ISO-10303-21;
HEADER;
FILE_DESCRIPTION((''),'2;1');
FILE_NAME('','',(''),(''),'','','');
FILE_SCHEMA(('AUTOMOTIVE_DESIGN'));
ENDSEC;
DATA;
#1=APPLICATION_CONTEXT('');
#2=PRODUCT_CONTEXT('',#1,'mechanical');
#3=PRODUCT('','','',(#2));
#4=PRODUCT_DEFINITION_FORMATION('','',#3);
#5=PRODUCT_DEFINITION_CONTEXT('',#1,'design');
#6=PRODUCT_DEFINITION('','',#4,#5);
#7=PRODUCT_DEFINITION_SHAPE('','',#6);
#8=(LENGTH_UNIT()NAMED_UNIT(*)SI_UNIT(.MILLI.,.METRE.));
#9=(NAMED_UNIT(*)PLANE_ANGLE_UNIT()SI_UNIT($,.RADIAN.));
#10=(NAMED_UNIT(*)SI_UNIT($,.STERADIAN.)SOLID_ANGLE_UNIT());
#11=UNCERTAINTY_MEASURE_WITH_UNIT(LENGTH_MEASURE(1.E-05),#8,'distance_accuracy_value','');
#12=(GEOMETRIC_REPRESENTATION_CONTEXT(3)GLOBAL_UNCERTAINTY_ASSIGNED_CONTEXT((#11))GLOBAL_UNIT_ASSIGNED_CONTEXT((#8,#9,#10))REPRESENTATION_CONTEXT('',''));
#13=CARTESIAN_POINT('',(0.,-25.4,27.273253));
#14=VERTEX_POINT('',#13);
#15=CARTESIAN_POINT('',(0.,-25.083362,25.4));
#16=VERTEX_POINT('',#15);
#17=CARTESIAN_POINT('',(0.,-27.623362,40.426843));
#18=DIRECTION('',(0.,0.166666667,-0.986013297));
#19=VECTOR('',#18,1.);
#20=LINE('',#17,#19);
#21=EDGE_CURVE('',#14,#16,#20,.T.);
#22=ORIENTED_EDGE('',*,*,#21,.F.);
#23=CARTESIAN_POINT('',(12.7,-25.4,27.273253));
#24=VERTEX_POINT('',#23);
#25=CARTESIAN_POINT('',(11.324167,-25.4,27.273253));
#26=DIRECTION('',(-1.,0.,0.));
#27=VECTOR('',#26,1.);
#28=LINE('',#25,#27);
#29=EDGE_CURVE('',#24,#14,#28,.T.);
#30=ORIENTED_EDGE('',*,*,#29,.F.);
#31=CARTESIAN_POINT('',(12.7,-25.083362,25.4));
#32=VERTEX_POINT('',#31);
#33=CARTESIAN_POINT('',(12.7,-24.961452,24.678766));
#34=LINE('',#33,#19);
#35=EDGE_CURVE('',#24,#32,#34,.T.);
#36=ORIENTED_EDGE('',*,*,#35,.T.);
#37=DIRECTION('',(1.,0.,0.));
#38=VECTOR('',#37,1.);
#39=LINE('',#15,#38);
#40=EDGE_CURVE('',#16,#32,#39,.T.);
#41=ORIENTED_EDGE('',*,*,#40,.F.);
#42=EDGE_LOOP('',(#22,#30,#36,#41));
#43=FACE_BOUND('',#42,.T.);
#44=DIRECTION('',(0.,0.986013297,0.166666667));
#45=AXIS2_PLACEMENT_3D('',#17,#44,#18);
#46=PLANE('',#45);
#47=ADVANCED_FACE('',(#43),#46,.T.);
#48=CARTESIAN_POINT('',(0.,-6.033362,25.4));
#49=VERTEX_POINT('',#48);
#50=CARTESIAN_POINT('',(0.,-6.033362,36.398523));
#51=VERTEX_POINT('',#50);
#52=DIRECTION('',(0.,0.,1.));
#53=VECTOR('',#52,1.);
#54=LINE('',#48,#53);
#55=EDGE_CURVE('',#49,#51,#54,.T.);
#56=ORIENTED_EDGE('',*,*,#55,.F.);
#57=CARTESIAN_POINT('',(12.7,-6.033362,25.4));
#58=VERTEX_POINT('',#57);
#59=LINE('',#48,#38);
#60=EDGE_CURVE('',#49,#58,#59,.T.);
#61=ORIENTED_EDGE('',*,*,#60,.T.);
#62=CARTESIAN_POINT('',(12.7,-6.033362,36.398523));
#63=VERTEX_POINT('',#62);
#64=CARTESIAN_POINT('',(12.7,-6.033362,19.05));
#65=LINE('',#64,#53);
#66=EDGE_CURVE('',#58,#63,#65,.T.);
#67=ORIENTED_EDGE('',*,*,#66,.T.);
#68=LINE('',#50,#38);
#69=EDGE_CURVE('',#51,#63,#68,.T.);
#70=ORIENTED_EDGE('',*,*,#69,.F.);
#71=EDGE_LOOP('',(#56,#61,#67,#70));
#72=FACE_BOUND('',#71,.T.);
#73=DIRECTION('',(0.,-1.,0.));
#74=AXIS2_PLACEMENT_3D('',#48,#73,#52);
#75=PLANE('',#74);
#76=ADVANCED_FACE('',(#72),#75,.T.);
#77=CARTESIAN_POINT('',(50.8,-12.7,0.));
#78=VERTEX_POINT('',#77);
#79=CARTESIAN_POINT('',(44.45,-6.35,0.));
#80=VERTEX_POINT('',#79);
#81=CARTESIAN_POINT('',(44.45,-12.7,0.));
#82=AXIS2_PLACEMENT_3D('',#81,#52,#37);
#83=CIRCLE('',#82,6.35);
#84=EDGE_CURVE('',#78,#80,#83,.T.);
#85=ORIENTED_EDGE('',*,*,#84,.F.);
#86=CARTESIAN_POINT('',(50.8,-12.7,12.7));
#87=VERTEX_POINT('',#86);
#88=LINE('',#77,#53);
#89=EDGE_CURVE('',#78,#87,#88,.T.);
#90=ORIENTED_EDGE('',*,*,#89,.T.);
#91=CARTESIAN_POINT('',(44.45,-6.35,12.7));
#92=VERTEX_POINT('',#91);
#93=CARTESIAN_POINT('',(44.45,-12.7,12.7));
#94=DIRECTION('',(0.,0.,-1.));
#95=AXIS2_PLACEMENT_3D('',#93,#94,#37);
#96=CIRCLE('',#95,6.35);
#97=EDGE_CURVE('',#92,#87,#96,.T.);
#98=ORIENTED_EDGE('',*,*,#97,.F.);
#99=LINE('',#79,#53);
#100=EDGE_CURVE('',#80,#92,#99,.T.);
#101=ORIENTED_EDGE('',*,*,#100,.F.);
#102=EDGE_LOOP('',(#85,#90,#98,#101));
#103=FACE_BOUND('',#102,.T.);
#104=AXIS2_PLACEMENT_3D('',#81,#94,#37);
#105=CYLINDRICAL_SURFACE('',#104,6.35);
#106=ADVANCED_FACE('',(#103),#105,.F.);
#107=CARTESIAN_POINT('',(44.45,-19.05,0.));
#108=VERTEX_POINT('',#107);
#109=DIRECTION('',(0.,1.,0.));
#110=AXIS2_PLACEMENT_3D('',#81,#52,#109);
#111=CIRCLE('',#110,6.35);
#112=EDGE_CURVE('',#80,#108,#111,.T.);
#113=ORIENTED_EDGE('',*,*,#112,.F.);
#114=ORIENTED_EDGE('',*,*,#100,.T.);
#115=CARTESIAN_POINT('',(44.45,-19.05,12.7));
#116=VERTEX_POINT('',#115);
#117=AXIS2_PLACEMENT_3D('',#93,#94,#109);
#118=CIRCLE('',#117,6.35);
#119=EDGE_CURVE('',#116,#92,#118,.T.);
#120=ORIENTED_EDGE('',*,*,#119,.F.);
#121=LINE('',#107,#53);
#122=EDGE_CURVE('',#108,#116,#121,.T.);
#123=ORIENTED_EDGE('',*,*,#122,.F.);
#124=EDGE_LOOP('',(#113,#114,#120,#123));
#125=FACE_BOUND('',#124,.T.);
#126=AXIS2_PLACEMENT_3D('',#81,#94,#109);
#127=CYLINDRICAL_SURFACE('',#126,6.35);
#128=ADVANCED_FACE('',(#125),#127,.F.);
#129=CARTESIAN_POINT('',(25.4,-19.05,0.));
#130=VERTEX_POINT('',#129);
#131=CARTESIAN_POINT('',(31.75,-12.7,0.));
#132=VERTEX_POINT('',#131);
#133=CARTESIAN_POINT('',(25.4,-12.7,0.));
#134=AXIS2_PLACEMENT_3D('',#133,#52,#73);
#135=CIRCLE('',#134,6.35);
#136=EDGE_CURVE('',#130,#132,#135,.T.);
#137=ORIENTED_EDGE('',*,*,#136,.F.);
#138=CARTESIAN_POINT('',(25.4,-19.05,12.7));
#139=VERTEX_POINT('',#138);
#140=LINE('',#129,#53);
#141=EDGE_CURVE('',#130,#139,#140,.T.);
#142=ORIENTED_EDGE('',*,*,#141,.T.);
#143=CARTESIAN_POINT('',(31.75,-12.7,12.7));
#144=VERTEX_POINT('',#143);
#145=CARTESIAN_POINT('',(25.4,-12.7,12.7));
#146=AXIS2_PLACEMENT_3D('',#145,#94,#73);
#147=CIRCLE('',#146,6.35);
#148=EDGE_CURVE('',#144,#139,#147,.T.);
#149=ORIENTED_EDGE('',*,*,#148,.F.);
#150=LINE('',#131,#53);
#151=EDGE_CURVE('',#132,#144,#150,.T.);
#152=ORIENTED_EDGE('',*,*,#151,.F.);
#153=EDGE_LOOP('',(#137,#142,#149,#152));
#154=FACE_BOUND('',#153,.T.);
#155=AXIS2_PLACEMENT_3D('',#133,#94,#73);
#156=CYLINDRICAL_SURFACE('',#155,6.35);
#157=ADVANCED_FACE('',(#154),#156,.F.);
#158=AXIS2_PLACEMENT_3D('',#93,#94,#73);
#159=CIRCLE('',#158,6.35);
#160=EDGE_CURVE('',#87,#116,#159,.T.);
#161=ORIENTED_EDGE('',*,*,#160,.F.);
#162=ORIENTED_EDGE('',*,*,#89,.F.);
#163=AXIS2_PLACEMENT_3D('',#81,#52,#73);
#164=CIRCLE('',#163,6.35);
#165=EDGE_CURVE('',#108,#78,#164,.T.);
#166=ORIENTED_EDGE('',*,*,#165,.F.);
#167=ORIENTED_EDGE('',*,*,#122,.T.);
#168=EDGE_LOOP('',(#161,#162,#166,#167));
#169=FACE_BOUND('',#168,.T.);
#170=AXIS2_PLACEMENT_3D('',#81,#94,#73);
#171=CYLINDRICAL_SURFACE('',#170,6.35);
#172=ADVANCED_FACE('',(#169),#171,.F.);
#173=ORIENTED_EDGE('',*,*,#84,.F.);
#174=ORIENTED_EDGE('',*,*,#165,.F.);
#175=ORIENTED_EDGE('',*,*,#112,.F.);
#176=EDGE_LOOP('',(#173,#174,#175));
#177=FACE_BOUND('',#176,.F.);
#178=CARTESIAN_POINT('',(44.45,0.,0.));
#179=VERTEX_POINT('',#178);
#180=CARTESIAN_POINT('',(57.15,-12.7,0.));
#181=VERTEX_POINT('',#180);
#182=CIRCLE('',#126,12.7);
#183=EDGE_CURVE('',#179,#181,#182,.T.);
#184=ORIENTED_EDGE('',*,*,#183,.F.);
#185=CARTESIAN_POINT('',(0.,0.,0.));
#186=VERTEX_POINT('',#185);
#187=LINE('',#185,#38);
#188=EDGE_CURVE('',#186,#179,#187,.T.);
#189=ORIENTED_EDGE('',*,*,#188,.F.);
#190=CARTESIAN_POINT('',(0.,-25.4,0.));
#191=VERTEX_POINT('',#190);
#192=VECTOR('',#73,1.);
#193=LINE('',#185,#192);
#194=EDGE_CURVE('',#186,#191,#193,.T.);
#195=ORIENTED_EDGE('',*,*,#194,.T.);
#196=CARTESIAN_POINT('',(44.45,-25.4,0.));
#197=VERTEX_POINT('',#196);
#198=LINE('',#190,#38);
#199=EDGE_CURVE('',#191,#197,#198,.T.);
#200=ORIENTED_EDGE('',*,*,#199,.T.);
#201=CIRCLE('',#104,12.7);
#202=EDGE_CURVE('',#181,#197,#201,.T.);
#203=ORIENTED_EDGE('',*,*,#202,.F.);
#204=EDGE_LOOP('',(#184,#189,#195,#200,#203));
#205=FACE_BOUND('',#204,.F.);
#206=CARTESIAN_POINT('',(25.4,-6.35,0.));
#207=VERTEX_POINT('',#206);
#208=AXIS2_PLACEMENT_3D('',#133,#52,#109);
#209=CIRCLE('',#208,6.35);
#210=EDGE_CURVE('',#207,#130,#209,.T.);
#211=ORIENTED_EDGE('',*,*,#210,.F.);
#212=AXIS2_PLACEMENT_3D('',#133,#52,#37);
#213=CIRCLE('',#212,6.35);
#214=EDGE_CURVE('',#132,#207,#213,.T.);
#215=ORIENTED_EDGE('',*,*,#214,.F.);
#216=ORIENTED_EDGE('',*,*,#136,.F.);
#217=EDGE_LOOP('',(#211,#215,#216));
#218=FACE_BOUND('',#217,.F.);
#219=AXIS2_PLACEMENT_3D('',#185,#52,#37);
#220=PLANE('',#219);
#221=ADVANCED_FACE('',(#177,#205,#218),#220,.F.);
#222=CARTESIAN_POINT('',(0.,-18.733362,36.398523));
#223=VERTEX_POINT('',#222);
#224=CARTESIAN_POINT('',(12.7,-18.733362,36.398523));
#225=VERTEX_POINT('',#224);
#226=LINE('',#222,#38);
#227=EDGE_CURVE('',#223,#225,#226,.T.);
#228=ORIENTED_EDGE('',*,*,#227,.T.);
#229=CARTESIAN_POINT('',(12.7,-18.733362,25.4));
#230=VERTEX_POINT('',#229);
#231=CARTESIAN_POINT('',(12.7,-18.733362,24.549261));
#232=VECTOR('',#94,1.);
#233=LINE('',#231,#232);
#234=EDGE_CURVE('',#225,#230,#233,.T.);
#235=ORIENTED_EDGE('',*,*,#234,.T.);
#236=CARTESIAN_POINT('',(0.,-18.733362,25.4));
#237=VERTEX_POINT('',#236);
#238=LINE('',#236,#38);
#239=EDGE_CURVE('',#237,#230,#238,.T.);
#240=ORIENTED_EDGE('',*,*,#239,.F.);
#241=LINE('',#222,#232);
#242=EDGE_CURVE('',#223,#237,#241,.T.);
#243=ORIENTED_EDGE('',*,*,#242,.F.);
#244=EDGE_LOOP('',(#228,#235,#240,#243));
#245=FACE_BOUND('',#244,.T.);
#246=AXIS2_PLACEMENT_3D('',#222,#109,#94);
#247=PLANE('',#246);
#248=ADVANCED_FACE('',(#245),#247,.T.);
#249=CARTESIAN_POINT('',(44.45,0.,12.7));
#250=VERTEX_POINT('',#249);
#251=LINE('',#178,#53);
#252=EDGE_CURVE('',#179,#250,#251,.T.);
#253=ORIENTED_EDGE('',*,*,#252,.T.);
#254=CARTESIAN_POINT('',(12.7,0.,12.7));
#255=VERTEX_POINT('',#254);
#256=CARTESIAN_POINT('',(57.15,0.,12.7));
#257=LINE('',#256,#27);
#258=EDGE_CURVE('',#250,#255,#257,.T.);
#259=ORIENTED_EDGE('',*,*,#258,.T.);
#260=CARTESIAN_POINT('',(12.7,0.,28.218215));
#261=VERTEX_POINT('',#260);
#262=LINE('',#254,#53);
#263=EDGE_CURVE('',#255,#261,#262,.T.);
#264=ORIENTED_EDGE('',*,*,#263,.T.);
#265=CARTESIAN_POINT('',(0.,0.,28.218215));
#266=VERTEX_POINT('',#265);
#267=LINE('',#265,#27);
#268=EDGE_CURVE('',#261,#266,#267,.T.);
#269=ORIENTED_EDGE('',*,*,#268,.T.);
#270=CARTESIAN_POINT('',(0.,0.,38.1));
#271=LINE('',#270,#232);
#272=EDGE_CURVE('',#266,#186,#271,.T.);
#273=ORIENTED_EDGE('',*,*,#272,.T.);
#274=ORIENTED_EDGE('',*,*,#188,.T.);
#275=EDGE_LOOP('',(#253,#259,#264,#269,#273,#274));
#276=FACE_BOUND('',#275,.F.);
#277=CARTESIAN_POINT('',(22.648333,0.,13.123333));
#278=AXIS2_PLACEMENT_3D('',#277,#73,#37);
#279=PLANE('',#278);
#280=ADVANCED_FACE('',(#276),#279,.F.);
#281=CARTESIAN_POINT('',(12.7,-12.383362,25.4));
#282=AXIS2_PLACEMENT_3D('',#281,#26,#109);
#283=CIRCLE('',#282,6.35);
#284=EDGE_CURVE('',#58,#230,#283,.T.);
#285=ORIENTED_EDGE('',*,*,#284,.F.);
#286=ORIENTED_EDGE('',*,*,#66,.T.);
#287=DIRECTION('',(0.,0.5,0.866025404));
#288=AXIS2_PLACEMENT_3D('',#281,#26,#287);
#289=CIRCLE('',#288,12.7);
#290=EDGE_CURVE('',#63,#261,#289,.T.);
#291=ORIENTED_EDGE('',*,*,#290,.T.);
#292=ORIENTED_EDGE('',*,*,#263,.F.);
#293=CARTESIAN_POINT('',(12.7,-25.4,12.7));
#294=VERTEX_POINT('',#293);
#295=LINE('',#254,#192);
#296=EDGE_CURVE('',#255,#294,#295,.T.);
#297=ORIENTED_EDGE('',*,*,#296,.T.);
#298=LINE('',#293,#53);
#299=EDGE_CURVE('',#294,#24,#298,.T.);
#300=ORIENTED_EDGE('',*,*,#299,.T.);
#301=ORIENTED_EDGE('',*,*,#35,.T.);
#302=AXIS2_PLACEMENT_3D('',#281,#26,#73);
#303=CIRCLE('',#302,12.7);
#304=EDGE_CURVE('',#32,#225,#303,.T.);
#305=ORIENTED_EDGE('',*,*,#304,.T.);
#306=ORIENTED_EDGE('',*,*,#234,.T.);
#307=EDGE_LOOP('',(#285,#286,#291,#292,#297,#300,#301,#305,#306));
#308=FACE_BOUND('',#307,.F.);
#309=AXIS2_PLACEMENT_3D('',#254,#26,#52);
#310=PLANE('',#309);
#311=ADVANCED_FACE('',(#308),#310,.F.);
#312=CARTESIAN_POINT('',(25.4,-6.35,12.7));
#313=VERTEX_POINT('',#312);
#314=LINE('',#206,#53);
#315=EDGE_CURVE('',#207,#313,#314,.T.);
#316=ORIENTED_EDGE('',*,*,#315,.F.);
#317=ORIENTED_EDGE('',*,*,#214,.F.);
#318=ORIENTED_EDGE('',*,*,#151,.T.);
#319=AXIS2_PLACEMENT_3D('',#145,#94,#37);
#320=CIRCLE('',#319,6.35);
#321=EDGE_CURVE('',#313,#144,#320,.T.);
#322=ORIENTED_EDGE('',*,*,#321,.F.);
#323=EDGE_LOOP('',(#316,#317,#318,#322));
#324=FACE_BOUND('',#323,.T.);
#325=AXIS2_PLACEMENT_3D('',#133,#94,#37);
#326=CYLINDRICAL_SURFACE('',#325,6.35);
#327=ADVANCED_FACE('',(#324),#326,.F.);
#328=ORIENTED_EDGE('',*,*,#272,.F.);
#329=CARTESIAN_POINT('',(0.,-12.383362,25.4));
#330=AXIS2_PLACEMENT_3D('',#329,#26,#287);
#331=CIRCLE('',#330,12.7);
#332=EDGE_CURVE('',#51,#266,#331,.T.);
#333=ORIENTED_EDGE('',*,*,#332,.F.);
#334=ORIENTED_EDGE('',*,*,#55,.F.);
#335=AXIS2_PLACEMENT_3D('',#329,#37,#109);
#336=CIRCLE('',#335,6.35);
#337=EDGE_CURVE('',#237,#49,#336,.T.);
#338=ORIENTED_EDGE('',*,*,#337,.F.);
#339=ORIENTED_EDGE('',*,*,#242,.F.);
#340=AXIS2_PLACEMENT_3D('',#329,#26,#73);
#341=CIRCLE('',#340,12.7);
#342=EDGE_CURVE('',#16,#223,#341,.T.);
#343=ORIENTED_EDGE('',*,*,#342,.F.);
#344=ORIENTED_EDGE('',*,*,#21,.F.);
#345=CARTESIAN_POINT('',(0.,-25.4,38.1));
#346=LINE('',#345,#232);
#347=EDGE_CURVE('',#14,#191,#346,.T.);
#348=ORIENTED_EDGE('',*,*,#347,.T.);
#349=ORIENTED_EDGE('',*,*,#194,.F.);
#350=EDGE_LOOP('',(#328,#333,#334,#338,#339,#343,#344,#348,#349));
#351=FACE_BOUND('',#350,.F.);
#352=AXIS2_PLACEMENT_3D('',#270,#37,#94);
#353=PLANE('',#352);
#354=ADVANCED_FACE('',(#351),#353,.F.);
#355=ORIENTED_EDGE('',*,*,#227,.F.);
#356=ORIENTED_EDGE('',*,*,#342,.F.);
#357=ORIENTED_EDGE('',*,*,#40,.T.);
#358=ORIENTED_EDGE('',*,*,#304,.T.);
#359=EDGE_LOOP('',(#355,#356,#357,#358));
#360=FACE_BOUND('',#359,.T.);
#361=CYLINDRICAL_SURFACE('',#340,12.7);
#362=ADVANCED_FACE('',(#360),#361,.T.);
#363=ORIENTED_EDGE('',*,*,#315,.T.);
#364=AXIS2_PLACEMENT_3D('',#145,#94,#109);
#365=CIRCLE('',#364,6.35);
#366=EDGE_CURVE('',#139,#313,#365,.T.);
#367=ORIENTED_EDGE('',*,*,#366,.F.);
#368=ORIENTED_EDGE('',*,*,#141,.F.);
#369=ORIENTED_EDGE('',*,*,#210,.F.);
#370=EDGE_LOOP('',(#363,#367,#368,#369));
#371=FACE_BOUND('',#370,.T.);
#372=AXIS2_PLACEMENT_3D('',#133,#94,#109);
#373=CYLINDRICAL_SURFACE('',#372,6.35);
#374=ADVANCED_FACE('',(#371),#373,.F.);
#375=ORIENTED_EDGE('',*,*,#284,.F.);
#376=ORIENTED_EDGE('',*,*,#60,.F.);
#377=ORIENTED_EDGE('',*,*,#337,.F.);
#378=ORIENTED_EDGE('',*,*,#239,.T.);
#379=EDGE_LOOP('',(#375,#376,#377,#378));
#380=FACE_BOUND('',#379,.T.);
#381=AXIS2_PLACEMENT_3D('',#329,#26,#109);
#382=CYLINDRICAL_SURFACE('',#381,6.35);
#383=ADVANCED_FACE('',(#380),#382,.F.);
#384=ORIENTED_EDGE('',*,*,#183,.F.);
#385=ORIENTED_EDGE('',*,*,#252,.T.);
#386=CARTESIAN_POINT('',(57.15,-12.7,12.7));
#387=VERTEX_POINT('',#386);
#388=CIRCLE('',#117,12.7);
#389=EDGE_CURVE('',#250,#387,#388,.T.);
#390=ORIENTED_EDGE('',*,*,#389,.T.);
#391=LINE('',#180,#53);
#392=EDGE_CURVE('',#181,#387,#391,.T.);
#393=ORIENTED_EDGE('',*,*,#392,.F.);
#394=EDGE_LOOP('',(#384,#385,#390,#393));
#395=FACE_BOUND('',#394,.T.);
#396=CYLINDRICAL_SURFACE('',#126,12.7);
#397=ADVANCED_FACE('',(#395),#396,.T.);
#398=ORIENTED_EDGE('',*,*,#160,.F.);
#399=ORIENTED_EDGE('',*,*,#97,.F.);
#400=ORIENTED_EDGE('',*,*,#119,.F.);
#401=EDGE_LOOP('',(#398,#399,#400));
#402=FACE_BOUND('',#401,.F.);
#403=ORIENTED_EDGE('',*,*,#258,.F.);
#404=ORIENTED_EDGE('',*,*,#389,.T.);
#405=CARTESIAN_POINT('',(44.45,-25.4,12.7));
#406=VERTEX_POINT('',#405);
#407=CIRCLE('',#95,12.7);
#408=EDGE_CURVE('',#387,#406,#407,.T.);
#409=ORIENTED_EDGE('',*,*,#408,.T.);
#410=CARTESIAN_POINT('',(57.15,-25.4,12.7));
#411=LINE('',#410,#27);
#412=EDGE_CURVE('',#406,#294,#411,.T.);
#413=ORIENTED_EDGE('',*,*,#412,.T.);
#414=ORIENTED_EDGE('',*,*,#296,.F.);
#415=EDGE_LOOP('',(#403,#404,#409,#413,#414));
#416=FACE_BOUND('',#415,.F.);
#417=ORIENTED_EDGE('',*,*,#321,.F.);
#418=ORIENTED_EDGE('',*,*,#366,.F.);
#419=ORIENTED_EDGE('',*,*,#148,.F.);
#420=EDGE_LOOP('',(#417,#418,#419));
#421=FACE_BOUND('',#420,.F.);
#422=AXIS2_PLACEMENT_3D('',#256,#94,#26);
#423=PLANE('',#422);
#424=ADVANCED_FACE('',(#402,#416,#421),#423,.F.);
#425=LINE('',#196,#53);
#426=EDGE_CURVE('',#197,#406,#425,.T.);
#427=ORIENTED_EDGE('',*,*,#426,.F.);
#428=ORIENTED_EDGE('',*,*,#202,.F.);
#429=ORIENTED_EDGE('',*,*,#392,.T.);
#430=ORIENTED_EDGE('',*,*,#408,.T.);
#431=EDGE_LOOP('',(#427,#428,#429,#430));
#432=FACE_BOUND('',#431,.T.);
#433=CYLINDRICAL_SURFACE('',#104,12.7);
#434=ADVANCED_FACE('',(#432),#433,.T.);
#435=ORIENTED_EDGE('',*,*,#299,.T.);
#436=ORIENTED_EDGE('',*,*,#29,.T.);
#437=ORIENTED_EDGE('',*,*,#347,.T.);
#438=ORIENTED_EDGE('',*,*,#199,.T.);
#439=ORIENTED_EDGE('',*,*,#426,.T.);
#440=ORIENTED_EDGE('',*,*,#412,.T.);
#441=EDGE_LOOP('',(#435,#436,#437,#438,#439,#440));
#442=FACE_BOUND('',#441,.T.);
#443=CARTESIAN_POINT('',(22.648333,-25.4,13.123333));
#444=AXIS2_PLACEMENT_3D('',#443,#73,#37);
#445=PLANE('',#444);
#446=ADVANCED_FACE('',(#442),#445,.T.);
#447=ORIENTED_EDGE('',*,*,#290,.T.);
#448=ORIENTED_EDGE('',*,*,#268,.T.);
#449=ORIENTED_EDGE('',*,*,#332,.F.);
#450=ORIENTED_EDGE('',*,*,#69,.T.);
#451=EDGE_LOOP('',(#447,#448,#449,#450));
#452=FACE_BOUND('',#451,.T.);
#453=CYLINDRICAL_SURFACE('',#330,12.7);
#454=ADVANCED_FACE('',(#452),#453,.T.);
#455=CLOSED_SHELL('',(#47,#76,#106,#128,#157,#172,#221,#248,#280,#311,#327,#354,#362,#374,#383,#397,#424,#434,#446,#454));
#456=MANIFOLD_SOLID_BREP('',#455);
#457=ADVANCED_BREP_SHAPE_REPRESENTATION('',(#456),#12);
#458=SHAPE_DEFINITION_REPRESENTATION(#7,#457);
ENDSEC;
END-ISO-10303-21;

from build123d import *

# Parameters (mm, degrees)
F1_DEPTH = 25.4
F3_DEPTH = 25.4
F5_DEPTH = 25.4


# Not quite as in the source:
# - a feature names something its author has since deleted; it is built from what else it names


with BuildPart() as f1:
    # F0 (on Front) → F1 (new body)
    with BuildSketch(Plane.XZ):
        Polygon((0, 38.1), (0, 0), (57.15, 0), (57.15, 12.7), (12.7, 12.7), (12.7, 38.1), align=None)
    extrude(amount=F1_DEPTH)

    # F2 (on Top) → F3 (cut)
    with BuildSketch(Plane.XY):
        with BuildLine():
            Line((25.4, -19.05), (25.4, -6.35))
            ThreePointArc((25.4, -6.35), (19.05, -12.7), (25.4, -19.05))
        make_face()
        with BuildLine():
            ThreePointArc((25.4, -19.05), (29.8901280605, -17.1901280605), (31.75, -12.7))
            ThreePointArc((31.75, -12.7), (29.8901280605, -8.2098719395), (25.4, -6.35))
            Line((25.4, -6.35), (25.4, -19.05))
        make_face()
        with BuildLine():
            Line((44.45, -19.05), (44.45, -6.35))
            ThreePointArc((44.45, -6.35), (38.1, -12.7), (44.45, -19.05))
        make_face()
        with BuildLine():
            ThreePointArc((50.8, -12.7), (48.9401280605, -8.2098719395), (44.45, -6.35))
            Line((44.45, -6.35), (44.45, -19.05))
            ThreePointArc((44.45, -19.05), (48.9401280605, -17.1901280605), (50.8, -12.7))
        make_face()
        with BuildLine():
            Line((57.15, -25.4), (57.15, -12.7))
            ThreePointArc((57.15, -12.7), (53.4302561211, -21.6802561211), (44.45, -25.4))
            Line((44.45, -25.4), (57.15, -25.4))
        make_face()
        with BuildLine():
            Line((57.15, 0), (44.45, 0))
            ThreePointArc((44.45, 0), (53.4302561211, -3.7197438789), (57.15, -12.7))
            Line((57.15, -12.7), (57.15, 0))
        make_face()
    extrude(amount=F3_DEPTH, mode=Mode.SUBTRACT)

    # F4 (on Right) → F5 (cut)
    with BuildSketch(Plane.YZ):
        with BuildLine():
            ThreePointArc((-18.7333624887, 25.4), (-12.3833624887, 19.05), (-6.0333624887, 25.4))
            ThreePointArc((-6.0333624887, 25.4), (-12.3833624887, 31.75), (-18.7333624887, 25.4))
        make_face()
        with BuildLine():
            ThreePointArc((-18.7333624887, 25.4), (-12.3833624887, 31.75), (-6.0333624887, 25.4))
            Line((-6.0333624887, 25.4), (-6.0333624887, 36.3985226281))
            ThreePointArc((-6.0333624887, 36.3985226281), (-9.0963606159, 37.6672579939), (-12.3833624887, 38.1))
            ThreePointArc((-12.3833624887, 38.1), (-15.6703643615, 37.6672579939), (-18.7333624887, 36.3985226281))
            Line((-18.7333624887, 36.3985226281), (-18.7333624887, 25.4))
        make_face()
        with BuildLine():
            ThreePointArc((-12.3833624887, 38.1), (-9.0963606159, 37.6672579939), (-6.0333624887, 36.3985226281))
            Line((-6.0333624887, 36.3985226281), (-6.0333624887, 38.1))
            Line((-6.0333624887, 38.1), (-12.3833624887, 38.1))
        make_face()
        with BuildLine():
            Line((-6.0333624887, 38.1), (-6.0333624887, 36.3985226281))
            ThreePointArc((-6.0333624887, 36.3985226281), (-1.3848398607, 31.75), (0.3166375113, 25.4))
            Line((0.3166375113, 25.4), (0.3166375113, 40.4268426491))
            Line((0.3166375113, 40.4268426491), (-27.6233624887, 40.4268426491))
            Line((-27.6233624887, 40.4268426491), (-25.0833624887, 25.4))
            ThreePointArc((-25.0833624887, 25.4), (-23.3818851168, 31.75), (-18.7333624887, 36.3985226281))
            Line((-18.7333624887, 36.3985226281), (-18.7333624887, 38.1))
            Line((-18.7333624887, 38.1), (-12.3833624887, 38.1))
            Line((-12.3833624887, 38.1), (-6.0333624887, 38.1))
        make_face()
        with BuildLine():
            Line((-18.7333624887, 38.1), (-18.7333624887, 36.3985226281))
            ThreePointArc((-18.7333624887, 36.3985226281), (-15.6703643615, 37.6672579939), (-12.3833624887, 38.1))
            Line((-12.3833624887, 38.1), (-18.7333624887, 38.1))
        make_face()
    extrude(amount=F5_DEPTH, mode=Mode.SUBTRACT)


solid = f1.part
